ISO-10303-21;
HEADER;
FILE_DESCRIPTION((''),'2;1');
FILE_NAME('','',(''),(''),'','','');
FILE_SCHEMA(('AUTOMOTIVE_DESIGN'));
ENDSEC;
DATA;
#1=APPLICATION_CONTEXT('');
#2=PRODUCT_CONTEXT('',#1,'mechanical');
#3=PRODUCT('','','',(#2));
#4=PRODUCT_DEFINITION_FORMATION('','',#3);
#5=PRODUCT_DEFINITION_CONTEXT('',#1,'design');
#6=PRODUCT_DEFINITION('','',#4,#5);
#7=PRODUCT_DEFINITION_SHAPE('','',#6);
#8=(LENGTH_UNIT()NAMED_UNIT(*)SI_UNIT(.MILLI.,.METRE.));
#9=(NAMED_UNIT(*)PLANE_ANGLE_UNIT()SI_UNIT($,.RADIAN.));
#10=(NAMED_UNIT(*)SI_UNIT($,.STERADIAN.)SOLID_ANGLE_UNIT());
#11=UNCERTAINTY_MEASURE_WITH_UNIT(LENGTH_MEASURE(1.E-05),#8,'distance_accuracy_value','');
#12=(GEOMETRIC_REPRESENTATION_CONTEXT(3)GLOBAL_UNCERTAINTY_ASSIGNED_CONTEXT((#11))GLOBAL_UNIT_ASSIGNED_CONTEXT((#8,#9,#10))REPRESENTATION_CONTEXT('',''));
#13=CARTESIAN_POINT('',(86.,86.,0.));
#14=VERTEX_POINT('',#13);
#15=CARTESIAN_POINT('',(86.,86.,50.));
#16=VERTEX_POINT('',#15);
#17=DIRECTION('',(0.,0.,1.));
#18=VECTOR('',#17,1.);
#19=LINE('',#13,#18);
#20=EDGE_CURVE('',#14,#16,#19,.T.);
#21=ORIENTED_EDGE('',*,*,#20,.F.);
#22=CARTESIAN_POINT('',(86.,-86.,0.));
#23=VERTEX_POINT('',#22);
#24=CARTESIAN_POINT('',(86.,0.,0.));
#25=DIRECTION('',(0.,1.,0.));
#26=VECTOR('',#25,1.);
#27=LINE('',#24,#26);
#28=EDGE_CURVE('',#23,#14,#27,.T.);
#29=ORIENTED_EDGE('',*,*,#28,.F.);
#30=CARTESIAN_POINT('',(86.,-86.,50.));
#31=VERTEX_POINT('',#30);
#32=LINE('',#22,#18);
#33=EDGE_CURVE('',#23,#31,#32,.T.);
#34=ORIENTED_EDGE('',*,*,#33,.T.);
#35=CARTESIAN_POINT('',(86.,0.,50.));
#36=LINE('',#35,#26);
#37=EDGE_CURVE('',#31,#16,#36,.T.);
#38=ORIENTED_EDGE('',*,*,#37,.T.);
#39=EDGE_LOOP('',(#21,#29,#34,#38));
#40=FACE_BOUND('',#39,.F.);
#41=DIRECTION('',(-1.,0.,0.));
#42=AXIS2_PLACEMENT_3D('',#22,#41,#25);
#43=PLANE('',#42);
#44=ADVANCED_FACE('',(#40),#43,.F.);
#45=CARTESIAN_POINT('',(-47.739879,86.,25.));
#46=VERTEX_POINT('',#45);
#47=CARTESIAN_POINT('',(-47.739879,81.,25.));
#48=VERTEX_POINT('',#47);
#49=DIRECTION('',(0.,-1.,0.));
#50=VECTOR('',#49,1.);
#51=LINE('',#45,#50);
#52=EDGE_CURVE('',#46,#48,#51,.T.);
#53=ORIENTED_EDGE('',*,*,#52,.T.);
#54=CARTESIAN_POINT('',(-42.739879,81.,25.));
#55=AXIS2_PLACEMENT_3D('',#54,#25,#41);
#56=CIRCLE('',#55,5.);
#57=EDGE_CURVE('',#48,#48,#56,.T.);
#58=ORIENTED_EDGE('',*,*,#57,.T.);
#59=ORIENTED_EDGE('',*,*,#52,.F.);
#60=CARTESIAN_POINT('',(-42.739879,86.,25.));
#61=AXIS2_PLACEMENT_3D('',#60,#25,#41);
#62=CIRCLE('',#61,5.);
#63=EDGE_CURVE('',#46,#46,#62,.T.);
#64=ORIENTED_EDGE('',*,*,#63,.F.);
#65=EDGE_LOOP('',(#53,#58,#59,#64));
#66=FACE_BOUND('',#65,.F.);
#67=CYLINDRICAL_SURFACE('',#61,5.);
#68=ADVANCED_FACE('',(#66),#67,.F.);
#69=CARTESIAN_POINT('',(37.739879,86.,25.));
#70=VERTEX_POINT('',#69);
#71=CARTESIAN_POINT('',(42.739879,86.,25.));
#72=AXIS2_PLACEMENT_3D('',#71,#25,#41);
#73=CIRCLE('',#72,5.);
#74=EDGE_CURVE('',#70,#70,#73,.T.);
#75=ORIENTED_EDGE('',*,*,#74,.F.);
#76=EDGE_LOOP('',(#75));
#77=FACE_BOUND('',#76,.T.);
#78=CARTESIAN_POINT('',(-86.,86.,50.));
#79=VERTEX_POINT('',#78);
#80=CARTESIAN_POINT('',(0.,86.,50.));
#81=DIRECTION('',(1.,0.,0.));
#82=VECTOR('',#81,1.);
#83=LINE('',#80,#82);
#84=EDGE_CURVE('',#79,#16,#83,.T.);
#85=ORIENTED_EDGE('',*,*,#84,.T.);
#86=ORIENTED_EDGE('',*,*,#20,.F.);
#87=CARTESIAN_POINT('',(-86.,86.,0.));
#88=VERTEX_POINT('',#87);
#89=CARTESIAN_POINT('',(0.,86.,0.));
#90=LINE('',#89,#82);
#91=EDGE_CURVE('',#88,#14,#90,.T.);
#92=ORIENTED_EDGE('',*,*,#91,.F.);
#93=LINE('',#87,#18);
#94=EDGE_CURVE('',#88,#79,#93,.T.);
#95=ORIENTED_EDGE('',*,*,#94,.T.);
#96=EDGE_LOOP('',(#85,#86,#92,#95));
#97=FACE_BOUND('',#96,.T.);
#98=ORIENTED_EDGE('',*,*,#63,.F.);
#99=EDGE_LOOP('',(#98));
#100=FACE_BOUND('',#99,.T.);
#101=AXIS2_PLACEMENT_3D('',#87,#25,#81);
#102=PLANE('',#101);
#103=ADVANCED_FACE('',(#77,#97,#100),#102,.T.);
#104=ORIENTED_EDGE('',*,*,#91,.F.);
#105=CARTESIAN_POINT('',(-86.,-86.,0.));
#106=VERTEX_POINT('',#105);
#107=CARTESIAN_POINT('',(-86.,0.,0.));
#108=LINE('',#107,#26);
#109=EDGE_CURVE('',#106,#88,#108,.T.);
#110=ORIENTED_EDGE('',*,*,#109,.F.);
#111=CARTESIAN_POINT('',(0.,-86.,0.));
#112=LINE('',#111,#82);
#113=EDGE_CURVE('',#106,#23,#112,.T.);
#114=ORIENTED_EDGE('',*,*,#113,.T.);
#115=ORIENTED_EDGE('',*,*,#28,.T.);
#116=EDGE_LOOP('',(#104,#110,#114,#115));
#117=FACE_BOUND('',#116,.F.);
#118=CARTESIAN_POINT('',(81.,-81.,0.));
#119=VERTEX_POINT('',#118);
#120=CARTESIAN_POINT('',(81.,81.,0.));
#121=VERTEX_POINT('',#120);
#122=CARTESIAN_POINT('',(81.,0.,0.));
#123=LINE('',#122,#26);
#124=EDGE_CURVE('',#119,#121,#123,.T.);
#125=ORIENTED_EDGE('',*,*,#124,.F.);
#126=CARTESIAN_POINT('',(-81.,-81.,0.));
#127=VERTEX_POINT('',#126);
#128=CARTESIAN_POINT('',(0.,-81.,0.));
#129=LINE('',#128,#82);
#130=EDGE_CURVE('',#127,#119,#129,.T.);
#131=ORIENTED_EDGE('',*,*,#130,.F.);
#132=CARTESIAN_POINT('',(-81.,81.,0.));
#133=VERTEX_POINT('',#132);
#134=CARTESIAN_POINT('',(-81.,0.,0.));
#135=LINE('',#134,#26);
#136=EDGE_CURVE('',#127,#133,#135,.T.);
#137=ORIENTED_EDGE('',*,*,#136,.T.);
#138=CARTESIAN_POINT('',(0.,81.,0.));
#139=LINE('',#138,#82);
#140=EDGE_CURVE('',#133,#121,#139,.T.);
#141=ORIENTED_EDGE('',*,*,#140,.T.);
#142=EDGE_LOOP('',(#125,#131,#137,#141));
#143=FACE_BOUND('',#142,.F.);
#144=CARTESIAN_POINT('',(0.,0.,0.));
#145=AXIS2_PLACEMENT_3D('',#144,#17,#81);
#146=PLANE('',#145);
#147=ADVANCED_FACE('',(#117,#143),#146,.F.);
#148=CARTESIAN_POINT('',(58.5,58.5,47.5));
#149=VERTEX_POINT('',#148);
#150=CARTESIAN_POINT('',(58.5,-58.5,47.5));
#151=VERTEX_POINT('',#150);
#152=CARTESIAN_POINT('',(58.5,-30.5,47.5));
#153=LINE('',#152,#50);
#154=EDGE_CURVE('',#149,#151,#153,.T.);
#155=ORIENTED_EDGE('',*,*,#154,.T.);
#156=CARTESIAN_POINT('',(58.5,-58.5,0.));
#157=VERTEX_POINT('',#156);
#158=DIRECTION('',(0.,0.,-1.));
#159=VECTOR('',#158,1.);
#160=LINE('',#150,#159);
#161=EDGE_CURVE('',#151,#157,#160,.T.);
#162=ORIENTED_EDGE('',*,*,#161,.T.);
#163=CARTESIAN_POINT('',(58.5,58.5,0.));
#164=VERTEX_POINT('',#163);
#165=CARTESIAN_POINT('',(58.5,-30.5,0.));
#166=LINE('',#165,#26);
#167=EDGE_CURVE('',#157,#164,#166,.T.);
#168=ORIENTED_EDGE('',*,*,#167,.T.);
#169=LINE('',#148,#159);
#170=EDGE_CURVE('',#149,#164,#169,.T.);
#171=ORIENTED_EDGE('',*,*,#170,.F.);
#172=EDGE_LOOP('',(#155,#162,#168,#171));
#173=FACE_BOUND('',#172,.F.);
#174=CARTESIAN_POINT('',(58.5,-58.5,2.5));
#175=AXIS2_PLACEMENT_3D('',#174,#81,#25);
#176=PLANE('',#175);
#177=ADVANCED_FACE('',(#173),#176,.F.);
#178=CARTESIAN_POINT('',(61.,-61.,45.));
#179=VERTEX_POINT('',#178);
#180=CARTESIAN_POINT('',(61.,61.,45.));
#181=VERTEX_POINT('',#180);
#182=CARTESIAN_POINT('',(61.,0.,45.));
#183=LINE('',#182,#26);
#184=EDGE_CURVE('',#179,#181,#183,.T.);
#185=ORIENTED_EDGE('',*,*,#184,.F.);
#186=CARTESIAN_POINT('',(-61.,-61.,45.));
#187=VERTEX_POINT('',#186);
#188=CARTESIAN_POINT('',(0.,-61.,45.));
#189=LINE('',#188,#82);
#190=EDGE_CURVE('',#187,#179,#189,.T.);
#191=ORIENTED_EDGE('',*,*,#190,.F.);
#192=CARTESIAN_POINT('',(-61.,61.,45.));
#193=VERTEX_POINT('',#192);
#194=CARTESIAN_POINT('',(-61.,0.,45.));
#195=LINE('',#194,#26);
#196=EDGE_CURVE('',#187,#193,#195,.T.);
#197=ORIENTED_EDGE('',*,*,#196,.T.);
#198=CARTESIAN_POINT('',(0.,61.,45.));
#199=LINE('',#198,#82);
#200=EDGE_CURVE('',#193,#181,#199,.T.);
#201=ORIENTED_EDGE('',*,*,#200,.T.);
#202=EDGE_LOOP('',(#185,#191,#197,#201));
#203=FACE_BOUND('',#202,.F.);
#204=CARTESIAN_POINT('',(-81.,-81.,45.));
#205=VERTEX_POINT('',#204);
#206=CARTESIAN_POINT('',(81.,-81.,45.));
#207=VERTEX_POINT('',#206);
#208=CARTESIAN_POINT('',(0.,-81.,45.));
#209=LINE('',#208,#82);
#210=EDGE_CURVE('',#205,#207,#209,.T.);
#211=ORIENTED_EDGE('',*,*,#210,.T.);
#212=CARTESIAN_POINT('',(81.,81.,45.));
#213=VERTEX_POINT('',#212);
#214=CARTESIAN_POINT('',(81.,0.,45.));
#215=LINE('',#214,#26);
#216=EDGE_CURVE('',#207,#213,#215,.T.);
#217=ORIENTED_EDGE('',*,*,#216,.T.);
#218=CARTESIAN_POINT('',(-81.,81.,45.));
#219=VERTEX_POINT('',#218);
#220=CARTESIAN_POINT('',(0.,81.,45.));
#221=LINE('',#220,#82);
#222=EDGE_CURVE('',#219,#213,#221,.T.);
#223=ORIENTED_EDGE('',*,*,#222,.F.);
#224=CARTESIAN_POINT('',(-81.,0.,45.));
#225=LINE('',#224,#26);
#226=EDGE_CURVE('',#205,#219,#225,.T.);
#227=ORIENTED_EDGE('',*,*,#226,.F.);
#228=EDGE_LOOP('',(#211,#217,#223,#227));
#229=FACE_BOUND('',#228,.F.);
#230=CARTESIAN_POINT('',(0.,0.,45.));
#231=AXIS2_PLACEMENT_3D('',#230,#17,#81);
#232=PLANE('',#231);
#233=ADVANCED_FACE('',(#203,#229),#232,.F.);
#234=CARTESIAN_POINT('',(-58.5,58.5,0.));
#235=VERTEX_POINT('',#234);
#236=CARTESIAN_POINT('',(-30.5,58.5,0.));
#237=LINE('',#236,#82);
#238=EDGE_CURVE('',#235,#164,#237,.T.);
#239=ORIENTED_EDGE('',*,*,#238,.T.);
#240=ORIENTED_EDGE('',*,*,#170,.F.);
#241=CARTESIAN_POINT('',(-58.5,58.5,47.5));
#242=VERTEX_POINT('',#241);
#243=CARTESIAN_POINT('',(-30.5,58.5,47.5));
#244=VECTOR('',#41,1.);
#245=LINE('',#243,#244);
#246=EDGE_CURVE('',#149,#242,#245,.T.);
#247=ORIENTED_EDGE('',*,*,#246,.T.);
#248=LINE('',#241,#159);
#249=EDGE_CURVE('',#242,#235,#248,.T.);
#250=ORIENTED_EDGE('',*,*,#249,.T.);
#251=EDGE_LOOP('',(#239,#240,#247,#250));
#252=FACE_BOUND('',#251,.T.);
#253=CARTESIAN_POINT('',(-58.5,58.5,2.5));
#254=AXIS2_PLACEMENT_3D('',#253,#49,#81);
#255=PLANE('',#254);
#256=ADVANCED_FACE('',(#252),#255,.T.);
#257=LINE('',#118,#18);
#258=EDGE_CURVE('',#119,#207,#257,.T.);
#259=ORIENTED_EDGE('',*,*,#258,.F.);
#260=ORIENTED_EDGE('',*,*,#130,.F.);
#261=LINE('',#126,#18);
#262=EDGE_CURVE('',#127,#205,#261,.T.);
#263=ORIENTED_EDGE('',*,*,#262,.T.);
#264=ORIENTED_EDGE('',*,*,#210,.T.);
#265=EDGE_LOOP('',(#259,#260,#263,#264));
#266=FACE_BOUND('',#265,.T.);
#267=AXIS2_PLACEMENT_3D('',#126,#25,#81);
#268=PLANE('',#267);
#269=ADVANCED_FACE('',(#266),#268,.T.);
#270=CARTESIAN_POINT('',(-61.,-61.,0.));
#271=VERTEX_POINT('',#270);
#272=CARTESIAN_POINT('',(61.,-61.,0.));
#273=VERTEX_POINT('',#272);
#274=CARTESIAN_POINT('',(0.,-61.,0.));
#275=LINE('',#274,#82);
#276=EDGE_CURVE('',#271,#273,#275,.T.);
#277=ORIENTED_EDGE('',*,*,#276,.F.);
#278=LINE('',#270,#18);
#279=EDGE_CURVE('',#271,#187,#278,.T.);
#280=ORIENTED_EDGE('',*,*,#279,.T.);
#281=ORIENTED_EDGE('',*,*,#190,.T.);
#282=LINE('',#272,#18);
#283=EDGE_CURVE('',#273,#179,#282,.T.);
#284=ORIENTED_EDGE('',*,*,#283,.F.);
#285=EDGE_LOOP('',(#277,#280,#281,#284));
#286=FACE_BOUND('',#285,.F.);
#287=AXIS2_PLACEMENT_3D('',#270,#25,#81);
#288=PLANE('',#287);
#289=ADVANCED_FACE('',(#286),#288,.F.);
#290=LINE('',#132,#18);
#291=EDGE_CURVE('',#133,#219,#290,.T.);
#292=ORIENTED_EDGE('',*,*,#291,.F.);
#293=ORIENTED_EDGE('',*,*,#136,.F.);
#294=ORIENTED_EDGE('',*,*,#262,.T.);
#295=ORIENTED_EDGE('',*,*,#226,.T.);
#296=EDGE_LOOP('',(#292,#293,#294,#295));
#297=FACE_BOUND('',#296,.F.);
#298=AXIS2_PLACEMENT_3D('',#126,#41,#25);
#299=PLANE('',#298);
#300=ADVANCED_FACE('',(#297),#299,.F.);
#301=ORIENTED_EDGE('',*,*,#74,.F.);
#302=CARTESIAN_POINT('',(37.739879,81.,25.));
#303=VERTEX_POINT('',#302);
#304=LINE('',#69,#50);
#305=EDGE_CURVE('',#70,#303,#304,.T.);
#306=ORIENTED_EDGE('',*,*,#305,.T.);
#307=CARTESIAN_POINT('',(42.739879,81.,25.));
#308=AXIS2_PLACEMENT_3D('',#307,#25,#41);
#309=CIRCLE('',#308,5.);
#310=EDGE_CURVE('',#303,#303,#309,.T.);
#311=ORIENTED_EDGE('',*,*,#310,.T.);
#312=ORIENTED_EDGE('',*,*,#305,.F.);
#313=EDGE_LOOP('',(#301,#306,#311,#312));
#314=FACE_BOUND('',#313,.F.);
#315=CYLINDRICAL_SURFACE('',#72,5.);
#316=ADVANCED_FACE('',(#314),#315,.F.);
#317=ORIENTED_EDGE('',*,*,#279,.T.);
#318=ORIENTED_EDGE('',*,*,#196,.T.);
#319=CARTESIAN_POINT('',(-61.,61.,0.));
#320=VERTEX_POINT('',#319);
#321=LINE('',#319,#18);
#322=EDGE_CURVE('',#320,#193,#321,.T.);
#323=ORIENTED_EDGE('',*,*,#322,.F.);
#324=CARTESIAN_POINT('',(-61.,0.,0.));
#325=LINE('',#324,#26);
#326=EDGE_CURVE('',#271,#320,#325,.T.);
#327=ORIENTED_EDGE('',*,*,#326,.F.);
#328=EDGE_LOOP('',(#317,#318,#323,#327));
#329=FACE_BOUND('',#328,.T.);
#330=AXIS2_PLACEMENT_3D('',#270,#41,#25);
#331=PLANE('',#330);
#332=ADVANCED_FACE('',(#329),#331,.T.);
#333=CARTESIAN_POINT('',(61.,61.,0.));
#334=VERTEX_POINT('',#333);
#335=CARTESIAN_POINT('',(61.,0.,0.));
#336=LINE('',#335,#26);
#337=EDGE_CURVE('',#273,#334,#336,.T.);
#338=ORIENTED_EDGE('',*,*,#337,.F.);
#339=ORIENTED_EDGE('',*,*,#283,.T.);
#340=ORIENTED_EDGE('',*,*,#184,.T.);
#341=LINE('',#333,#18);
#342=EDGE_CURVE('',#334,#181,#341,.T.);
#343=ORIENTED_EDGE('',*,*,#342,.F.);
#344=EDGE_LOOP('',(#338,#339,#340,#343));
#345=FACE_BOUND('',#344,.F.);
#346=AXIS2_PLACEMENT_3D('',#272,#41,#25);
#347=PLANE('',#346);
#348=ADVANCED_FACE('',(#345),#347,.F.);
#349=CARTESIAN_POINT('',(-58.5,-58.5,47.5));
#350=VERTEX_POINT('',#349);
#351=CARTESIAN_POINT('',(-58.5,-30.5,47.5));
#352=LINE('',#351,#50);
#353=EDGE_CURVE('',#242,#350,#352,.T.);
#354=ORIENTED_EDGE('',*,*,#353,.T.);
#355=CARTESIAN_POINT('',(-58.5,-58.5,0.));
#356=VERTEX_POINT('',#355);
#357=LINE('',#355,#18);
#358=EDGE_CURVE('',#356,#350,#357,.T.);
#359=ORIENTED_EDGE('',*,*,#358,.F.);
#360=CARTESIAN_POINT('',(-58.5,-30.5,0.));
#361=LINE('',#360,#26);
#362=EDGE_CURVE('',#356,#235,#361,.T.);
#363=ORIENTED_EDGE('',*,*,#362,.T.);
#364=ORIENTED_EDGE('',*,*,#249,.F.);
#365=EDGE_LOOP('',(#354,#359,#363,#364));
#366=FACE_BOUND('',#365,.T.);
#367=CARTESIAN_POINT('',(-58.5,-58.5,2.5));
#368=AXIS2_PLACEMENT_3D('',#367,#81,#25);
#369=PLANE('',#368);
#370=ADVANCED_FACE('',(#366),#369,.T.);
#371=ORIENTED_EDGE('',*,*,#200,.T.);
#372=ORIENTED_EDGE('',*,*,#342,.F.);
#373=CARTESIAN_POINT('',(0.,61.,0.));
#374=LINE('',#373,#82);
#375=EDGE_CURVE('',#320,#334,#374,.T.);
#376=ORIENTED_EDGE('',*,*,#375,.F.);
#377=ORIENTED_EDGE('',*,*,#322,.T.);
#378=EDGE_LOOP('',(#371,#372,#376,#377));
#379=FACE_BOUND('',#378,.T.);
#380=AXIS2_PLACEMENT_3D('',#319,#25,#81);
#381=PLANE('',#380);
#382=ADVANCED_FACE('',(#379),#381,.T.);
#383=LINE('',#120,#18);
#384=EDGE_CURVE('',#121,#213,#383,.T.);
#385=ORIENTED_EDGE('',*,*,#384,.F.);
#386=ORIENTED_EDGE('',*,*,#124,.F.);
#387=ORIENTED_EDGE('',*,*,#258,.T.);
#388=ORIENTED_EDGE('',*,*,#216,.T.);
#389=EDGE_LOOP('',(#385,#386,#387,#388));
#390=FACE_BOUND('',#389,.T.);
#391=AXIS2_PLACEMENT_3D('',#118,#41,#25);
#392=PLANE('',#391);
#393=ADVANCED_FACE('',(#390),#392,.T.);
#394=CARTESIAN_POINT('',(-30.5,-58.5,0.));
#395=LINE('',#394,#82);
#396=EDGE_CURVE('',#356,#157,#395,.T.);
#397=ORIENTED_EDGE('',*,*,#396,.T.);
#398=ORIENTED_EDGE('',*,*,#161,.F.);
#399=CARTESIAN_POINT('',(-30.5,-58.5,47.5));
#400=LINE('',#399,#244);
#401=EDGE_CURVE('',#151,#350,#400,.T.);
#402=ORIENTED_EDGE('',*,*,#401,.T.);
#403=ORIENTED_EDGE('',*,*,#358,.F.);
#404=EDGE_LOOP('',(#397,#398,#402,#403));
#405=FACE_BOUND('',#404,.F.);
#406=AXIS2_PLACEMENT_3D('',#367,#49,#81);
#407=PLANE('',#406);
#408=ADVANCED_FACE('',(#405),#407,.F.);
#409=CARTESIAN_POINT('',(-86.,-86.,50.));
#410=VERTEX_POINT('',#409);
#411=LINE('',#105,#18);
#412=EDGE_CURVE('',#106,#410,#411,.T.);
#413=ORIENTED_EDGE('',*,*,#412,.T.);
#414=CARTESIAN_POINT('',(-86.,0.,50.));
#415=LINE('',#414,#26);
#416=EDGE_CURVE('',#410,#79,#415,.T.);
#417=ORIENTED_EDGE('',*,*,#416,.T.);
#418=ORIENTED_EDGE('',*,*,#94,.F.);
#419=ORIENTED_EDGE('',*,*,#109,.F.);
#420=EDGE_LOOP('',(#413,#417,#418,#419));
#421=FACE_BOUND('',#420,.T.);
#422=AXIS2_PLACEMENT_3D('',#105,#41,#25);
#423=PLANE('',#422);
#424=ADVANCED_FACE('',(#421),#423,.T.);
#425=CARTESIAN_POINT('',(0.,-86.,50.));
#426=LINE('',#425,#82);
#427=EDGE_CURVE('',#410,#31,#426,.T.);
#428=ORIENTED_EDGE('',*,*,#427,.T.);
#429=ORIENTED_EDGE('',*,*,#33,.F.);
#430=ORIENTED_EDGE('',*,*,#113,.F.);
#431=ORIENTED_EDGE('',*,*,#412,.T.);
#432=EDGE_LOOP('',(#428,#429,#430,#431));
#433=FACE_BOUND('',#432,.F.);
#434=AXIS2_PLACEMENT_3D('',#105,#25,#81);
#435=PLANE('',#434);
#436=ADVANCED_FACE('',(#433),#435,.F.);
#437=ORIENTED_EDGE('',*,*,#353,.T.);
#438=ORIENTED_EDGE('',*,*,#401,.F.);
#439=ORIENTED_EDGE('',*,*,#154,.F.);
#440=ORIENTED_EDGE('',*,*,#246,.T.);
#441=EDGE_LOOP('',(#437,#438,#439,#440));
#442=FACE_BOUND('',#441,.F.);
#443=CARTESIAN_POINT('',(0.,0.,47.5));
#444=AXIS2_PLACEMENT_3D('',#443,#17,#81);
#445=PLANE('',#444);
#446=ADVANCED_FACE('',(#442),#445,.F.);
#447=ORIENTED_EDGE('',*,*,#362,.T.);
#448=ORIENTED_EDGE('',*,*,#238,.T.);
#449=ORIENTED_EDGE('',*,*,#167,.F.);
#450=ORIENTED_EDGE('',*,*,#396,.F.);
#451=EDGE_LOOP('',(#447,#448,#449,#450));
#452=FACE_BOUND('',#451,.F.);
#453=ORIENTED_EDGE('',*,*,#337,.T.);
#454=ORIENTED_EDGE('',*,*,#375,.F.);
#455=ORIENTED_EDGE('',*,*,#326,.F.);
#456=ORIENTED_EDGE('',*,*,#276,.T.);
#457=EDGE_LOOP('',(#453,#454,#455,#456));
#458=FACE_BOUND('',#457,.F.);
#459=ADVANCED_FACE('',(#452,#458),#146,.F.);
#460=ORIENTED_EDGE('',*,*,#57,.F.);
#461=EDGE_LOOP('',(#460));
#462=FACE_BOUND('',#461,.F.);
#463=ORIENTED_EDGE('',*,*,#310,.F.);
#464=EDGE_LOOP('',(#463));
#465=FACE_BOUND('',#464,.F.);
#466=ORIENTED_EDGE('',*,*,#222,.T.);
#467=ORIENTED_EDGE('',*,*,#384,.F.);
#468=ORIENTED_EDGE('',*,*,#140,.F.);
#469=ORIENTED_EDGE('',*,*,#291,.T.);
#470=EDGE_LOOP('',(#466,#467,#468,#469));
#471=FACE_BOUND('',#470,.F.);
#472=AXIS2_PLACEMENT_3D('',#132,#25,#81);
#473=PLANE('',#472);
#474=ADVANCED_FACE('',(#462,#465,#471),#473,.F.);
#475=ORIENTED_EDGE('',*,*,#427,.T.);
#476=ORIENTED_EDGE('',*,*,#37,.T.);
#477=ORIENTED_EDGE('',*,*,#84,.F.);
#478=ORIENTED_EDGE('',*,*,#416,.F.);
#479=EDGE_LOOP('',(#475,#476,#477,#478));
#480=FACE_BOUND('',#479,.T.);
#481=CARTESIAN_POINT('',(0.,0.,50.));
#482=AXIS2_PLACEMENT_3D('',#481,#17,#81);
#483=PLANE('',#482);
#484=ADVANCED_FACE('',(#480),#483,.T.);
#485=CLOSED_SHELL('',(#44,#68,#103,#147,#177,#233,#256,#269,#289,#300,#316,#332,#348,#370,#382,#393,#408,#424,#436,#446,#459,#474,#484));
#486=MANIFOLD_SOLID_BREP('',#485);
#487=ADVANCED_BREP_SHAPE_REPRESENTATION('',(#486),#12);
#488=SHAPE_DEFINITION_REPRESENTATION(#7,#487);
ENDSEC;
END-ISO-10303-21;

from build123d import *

# Parameters (mm, degrees)
F0_W     = 172
F0_H     = 172
F1_DEPTH = 50
F2_W     = 162
F2_H     = 162
F2_W_2   = 122
F2_H_2   = 122
F3_DEPTH = 45
F4_T     = -2.5
F5_R     = 5
F6_DEPTH = 9.5


# Not quite as in the source:
# - a shell that OpenCascade refuses in one call is made with other operations: the cavity is built on its own and cut out


with BuildPart() as f1:
    # F0 (on Top) → F1 (new body)
    with BuildSketch(Plane.XY):
        Rectangle(F0_W, F0_H)
    extrude(amount=F1_DEPTH)

    # F2 (on Top) → F3 (cut)
    with BuildSketch(Plane.XY):
        Rectangle(F2_W, F2_H)
        Rectangle(F2_W_2, F2_H_2, mode=Mode.SUBTRACT)
    extrude(amount=F3_DEPTH, mode=Mode.SUBTRACT)

    # F4: a shell. OpenCascade refuses it in one call, so the cavity is built on its own and cut out:
    # the body offset inwards by the wall thickness, plus a prism from it out through each open face.
    f4_core = offset(f1.part, amount=F4_T, kind=Kind.INTERSECTION, mode=Mode.PRIVATE)
    f4_exits = [f4_core.faces().sort_by_distance(p)[0] for p in [
        (0, 0, 2.5),
    ]]
    add(f4_core, mode=Mode.SUBTRACT)
    extrude(f4_exits, amount=-F4_T, mode=Mode.SUBTRACT)

    # F5 (on face) → F6 (cut)
    with BuildSketch(Plane(origin=(0, 86, 0), x_dir=(-1, 0, 0), z_dir=(0, 1, 0))):
        with Locations((42.7398793399, 25)):
            Circle(F5_R)
        with Locations((-42.7398793399, 25)):
            Circle(F5_R)
    extrude(amount=-F6_DEPTH, mode=Mode.SUBTRACT)


solid = f1.part
